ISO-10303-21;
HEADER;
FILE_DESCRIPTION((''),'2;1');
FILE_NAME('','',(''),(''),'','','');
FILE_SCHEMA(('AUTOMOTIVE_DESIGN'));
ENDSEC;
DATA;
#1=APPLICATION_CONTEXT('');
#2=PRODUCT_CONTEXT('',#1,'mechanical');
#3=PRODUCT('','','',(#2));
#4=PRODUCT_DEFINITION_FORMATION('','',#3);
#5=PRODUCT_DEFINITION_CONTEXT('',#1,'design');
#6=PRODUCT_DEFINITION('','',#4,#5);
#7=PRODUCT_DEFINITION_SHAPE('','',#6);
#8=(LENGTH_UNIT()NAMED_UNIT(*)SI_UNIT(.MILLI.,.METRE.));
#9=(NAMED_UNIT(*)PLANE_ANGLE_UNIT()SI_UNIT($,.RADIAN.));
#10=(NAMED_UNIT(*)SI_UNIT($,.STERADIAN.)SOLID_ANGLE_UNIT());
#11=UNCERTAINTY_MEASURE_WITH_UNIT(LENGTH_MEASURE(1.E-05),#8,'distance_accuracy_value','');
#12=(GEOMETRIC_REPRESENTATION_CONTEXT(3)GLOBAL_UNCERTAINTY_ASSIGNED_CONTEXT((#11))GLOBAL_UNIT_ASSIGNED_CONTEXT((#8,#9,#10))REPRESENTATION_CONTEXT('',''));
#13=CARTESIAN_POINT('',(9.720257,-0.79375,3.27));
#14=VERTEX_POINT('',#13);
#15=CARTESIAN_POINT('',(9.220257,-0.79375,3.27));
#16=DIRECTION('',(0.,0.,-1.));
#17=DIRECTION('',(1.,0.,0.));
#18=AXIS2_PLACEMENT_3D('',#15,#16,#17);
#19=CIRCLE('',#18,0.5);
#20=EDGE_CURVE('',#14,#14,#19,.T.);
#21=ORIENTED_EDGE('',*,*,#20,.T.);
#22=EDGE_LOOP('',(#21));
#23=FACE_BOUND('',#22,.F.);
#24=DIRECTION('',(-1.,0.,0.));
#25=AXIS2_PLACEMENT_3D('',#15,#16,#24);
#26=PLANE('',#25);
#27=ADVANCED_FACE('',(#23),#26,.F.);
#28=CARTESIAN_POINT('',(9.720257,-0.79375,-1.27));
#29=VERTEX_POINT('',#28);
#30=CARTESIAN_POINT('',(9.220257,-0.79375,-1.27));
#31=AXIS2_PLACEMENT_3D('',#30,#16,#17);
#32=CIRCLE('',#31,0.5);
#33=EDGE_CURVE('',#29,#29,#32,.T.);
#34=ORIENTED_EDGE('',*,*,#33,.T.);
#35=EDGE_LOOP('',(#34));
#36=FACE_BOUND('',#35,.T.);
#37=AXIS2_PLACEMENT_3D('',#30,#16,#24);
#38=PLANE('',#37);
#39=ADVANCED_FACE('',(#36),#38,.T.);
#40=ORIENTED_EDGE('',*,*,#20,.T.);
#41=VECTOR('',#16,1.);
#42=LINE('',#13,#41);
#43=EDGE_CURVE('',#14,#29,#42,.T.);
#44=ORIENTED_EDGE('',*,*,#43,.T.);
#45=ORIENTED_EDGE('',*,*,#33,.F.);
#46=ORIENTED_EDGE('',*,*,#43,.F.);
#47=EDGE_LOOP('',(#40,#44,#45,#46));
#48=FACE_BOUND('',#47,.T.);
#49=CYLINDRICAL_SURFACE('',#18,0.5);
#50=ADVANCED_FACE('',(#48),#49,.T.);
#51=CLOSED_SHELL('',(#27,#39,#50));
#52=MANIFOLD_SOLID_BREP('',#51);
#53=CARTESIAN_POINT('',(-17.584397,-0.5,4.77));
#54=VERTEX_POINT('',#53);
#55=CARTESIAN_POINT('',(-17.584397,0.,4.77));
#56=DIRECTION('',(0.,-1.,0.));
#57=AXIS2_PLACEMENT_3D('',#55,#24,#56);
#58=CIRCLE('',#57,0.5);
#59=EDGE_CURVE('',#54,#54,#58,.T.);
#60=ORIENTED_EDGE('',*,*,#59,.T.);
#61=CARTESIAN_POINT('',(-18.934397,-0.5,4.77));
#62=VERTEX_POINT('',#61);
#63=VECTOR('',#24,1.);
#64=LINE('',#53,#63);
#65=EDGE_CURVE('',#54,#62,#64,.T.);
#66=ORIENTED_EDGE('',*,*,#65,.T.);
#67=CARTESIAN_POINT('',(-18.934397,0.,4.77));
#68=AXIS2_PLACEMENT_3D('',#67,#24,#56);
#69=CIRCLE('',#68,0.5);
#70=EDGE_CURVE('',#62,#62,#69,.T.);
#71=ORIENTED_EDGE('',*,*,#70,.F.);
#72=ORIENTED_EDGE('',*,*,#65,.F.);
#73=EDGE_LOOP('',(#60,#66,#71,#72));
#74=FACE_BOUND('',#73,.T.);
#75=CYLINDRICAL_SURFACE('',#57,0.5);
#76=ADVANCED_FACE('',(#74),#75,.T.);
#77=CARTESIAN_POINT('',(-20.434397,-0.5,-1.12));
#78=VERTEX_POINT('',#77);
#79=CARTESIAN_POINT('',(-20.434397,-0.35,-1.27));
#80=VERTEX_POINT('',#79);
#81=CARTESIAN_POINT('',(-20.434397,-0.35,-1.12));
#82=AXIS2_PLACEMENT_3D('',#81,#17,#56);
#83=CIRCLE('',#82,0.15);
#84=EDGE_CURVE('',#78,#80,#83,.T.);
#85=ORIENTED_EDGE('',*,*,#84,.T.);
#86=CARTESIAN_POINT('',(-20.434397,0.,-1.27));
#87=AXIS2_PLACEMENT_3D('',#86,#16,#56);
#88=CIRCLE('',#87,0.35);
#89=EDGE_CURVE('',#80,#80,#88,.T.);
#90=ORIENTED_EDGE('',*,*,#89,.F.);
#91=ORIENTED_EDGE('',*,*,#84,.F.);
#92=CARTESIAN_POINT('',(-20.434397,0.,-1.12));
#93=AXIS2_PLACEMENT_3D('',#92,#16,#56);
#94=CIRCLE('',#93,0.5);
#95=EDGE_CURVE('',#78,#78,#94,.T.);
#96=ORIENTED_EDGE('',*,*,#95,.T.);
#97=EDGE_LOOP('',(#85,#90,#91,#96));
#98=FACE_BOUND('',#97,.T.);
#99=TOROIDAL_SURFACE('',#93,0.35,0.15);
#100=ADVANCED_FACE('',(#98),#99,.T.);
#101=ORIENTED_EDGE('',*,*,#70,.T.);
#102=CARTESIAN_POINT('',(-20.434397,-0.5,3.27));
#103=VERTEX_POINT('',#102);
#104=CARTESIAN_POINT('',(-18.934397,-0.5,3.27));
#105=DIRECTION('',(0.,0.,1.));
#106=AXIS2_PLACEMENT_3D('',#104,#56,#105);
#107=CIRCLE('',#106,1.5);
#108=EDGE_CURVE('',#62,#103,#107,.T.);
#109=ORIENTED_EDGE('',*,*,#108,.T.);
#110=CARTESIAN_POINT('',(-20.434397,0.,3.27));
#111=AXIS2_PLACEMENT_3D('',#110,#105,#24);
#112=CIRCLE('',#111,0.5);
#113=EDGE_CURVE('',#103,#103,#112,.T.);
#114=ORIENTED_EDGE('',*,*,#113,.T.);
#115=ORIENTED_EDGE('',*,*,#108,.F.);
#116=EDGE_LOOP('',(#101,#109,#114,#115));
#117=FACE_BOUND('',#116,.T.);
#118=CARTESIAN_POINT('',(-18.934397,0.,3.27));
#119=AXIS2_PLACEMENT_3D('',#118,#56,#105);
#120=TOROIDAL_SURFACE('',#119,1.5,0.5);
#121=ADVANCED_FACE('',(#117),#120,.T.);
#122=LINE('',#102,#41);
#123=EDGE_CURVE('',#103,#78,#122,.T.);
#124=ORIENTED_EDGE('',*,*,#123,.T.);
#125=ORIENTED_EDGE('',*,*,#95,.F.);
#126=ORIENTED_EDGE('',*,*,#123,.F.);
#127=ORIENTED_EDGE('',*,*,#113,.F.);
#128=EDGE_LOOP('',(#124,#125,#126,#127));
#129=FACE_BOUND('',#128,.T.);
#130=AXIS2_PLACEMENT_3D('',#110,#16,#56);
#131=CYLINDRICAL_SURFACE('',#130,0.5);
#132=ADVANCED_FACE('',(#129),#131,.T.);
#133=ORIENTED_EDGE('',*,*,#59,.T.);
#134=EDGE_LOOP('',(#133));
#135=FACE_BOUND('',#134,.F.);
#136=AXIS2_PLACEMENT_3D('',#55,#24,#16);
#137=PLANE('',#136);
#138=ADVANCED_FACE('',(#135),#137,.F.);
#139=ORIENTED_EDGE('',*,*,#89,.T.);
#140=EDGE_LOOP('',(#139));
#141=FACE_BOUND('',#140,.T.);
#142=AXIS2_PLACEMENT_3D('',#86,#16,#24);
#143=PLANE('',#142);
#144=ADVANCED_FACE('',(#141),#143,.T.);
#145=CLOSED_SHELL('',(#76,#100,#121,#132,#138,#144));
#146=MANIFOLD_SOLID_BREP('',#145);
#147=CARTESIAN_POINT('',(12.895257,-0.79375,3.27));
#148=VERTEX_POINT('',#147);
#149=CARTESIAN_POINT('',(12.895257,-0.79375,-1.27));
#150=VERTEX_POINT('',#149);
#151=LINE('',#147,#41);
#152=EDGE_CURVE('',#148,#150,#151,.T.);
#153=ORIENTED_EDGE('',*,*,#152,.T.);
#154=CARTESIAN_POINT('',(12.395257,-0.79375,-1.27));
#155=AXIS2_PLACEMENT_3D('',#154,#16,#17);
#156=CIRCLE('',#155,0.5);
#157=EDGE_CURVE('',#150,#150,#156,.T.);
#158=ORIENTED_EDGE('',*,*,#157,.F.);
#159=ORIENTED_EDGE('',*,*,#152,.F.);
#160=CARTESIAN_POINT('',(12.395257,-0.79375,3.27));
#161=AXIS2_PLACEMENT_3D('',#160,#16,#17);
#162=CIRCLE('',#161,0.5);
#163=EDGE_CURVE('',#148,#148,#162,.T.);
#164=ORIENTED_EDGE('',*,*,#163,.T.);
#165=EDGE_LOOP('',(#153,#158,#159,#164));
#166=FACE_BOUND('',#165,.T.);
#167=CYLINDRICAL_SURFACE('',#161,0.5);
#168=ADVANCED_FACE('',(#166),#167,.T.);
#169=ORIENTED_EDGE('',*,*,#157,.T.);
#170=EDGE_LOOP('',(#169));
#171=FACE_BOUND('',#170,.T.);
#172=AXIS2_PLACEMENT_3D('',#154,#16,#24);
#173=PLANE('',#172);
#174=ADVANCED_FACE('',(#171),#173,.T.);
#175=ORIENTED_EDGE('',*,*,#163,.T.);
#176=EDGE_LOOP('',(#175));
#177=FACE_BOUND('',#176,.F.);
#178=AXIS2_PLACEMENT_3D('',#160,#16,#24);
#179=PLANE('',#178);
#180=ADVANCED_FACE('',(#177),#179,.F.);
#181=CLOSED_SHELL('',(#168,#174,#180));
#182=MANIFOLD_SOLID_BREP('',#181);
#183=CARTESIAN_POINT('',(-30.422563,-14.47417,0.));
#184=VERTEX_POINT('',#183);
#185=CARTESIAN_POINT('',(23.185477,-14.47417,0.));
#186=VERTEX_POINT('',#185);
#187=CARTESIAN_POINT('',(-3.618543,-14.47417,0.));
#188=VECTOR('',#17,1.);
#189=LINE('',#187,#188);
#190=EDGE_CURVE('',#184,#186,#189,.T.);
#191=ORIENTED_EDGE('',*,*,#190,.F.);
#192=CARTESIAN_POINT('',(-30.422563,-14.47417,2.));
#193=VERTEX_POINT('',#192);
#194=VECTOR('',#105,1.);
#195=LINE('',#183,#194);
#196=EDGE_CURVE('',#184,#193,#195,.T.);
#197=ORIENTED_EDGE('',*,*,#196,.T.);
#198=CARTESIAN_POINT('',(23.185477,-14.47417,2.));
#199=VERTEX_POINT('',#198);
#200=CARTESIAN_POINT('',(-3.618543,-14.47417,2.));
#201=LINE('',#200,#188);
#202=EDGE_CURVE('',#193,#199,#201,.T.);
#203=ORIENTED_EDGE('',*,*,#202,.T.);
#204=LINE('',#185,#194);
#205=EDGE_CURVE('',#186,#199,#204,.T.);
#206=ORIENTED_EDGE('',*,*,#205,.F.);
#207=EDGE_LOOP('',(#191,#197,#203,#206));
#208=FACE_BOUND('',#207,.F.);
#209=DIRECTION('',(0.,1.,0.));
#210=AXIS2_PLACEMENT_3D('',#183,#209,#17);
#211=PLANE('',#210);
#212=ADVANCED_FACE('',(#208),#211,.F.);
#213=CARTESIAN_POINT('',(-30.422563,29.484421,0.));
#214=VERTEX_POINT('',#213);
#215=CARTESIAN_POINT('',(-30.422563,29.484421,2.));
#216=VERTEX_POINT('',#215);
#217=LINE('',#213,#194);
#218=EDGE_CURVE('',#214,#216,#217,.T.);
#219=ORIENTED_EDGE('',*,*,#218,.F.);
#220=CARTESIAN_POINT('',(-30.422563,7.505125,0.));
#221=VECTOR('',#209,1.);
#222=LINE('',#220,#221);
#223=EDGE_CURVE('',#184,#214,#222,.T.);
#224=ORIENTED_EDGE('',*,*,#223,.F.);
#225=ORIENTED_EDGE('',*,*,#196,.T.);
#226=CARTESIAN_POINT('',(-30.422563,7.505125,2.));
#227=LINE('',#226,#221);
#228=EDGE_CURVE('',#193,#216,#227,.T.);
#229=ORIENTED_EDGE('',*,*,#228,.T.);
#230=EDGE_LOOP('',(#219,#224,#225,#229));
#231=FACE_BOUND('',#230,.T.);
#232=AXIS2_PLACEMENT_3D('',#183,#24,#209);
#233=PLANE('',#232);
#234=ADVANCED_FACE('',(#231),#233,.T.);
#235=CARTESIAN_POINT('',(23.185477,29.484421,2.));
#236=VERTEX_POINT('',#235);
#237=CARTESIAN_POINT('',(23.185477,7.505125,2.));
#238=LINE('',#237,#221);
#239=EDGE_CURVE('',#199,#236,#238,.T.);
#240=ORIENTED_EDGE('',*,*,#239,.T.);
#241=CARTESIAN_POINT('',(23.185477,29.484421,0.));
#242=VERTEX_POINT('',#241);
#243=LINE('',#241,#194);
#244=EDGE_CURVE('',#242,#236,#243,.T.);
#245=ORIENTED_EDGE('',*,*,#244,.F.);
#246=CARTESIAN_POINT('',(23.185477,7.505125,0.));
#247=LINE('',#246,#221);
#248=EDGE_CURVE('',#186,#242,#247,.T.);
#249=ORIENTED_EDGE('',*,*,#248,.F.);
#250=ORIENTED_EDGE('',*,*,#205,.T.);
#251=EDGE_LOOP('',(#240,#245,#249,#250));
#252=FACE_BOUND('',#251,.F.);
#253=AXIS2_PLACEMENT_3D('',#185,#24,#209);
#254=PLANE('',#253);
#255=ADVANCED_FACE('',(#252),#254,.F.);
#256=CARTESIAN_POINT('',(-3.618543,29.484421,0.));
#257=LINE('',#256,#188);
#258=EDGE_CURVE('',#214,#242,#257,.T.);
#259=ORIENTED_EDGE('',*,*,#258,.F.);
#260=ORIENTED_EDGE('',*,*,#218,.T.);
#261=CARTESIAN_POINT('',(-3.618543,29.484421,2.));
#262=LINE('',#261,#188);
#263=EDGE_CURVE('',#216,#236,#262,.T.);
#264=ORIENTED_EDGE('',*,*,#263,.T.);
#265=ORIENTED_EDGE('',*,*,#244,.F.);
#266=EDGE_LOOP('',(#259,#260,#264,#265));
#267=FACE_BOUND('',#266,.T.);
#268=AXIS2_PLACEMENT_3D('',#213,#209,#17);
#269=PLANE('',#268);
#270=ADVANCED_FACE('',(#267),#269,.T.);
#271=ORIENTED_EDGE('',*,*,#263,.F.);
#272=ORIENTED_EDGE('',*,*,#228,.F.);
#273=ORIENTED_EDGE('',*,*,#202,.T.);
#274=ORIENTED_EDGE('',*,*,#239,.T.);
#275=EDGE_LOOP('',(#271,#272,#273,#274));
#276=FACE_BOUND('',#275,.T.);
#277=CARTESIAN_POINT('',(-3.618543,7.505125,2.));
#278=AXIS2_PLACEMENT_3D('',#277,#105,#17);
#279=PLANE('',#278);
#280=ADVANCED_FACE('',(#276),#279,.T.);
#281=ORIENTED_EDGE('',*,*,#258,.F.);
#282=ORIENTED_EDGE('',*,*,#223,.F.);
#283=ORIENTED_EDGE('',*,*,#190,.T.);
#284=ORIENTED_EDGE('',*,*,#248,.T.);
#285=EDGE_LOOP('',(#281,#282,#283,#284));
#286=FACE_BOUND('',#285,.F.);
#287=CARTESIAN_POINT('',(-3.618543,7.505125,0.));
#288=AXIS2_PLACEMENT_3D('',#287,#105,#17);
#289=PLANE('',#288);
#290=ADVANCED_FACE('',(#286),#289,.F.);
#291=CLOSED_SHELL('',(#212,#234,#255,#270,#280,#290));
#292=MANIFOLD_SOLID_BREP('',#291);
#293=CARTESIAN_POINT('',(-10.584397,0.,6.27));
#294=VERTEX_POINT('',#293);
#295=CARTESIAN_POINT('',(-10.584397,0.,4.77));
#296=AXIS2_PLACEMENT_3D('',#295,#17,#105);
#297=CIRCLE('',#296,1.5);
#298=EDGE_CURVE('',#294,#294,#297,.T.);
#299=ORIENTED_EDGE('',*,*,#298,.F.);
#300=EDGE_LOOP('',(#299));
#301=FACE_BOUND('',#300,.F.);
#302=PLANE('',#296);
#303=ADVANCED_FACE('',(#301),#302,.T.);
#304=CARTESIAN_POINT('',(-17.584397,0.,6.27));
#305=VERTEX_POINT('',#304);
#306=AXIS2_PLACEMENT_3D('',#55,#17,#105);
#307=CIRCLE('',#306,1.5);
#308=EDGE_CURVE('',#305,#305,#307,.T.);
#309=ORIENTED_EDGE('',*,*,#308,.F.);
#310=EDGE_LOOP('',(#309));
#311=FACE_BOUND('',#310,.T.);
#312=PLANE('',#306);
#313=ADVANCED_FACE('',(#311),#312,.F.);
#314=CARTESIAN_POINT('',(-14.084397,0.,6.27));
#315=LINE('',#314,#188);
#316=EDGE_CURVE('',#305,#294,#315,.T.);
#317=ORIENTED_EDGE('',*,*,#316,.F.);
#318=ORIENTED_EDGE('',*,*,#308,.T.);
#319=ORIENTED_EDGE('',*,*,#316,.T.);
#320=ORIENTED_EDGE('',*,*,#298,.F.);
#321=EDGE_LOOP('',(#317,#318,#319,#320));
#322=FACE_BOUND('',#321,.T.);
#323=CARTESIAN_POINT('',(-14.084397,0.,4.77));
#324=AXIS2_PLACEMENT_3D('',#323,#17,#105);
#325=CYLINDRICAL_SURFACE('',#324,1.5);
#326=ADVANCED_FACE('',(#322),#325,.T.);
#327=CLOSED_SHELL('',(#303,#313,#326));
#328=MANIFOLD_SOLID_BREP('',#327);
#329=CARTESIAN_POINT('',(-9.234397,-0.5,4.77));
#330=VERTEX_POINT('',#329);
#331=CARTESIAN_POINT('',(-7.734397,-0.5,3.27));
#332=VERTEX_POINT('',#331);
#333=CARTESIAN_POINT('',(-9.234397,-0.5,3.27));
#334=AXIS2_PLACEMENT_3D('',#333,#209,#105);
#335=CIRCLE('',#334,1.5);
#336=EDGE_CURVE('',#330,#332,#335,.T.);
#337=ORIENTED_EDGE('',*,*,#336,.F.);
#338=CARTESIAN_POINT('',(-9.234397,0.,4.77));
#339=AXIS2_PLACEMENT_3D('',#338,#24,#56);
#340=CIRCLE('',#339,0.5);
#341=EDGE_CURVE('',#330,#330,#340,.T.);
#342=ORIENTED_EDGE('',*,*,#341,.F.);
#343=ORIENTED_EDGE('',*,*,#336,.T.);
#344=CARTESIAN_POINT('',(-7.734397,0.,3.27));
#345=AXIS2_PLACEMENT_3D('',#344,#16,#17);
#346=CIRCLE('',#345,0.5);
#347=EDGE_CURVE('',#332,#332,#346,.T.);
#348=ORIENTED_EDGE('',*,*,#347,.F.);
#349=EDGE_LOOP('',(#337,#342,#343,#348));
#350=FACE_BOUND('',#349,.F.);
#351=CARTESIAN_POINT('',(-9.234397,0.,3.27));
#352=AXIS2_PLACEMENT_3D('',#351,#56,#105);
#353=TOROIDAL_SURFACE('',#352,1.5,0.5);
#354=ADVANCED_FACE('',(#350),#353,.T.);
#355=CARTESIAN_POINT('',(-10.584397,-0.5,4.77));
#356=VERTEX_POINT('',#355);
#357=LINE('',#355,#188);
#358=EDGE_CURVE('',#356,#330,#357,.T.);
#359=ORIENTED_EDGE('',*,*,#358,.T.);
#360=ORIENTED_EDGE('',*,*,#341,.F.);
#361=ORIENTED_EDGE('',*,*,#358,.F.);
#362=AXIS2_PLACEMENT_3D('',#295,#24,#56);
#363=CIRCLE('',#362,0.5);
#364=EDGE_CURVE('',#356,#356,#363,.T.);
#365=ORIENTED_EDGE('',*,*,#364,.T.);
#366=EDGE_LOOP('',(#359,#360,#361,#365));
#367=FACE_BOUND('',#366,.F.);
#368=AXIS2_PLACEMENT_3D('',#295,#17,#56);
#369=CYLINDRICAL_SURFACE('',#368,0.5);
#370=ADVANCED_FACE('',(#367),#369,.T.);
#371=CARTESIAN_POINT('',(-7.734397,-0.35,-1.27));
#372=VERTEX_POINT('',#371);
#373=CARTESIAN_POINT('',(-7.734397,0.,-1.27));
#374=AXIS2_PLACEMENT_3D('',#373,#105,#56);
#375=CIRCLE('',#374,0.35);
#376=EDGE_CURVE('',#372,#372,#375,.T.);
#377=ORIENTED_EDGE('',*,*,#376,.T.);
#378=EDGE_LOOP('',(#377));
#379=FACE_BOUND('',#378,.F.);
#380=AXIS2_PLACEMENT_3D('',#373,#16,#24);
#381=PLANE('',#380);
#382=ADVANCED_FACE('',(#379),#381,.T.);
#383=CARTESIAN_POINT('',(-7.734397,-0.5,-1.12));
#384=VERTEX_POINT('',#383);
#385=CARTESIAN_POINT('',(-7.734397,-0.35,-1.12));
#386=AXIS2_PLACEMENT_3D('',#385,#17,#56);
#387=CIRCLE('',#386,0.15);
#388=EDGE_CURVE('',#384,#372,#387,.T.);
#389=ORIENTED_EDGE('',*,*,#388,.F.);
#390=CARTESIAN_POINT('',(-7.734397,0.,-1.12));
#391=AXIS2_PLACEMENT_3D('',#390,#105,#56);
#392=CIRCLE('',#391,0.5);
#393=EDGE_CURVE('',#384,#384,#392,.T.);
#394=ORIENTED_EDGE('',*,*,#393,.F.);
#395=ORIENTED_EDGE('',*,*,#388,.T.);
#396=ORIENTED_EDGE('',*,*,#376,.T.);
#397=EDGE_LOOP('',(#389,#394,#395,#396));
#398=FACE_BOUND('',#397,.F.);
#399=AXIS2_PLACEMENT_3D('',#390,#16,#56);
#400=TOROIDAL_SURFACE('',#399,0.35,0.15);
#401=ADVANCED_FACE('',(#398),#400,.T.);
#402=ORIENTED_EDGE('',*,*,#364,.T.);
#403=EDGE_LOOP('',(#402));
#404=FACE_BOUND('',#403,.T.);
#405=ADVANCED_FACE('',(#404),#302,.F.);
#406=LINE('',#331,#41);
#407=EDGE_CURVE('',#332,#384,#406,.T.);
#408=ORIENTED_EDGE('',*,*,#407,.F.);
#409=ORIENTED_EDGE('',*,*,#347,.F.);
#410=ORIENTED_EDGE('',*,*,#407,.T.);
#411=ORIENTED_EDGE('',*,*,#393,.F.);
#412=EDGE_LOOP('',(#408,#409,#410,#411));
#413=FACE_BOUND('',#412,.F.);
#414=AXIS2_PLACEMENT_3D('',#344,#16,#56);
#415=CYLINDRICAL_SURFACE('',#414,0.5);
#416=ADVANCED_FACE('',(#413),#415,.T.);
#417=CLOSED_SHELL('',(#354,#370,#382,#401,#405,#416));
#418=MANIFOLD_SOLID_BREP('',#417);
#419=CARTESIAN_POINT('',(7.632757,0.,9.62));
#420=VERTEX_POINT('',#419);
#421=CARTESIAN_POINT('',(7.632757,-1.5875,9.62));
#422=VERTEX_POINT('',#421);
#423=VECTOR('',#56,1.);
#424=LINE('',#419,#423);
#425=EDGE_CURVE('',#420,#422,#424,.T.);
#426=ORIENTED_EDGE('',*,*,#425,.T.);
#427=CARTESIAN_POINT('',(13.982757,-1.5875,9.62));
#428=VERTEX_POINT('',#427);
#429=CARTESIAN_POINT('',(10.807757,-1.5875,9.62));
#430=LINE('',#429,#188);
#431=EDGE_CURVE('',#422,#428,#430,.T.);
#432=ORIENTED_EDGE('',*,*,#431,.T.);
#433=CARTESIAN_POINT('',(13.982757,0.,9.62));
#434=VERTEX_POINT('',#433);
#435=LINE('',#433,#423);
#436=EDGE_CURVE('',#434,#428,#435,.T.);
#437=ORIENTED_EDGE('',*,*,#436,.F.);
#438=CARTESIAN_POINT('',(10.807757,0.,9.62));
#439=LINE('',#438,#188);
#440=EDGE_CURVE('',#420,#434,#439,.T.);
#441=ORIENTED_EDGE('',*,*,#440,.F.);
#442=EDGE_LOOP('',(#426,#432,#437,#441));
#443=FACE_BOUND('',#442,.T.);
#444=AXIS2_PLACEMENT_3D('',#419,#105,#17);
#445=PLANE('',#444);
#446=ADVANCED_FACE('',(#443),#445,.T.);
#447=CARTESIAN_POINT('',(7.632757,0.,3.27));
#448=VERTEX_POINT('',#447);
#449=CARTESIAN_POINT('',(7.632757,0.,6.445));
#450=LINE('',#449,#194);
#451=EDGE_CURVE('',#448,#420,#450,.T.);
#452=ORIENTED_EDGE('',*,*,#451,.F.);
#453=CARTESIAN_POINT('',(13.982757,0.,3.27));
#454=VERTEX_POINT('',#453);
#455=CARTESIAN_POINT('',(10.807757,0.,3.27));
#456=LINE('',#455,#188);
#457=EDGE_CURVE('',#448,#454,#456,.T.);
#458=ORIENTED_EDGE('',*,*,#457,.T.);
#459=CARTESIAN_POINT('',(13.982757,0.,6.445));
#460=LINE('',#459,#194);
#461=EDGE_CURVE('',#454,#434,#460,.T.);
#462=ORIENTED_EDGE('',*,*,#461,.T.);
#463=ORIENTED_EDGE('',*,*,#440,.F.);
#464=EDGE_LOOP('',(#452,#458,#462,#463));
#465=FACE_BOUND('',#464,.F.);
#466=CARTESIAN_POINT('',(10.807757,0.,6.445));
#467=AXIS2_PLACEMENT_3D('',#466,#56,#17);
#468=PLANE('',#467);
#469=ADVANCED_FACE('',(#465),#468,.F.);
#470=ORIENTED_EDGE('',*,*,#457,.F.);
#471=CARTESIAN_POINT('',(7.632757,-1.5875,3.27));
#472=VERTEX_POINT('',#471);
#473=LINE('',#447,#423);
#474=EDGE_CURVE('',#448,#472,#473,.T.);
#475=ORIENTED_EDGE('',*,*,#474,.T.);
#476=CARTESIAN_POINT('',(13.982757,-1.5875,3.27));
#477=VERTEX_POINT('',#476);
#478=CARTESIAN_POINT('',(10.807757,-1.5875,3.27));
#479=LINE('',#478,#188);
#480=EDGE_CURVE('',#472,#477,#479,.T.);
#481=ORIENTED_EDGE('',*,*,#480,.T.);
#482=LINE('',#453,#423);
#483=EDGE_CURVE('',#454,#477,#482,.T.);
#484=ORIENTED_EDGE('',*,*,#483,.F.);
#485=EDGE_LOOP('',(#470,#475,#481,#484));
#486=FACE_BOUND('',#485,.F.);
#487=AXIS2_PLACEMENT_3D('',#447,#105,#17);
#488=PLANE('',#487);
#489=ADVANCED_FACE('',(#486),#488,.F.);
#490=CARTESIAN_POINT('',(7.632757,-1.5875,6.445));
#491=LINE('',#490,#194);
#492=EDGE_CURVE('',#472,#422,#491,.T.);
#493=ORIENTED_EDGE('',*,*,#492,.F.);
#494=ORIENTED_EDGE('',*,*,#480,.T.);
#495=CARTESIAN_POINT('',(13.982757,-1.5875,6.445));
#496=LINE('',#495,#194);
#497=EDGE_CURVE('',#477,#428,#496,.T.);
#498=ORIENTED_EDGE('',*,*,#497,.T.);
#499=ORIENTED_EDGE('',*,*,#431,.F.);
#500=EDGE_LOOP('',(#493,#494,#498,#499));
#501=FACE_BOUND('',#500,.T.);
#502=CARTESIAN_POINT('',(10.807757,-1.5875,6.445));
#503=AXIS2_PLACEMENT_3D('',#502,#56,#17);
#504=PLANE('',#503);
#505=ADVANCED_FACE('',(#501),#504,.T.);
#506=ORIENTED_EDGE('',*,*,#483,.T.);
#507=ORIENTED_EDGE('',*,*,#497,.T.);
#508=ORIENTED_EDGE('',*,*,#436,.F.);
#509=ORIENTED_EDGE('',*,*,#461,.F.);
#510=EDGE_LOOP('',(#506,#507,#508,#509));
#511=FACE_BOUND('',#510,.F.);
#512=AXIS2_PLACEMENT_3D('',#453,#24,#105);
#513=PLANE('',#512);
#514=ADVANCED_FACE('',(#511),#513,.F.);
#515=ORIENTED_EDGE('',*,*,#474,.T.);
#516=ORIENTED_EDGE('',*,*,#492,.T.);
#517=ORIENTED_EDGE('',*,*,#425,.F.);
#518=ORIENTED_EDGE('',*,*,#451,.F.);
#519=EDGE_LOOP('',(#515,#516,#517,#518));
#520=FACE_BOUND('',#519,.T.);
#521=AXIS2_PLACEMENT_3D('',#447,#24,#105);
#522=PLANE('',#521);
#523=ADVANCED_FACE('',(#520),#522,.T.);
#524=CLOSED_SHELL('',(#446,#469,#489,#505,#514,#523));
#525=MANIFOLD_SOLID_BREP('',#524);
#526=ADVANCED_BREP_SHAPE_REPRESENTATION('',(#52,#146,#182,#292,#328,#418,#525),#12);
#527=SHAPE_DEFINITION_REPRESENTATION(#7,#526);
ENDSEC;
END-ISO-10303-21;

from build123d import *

# Parameters (mm, degrees)
F0_W      = 53.608039394
F0_H      = 43.9585913264
F1_DEPTH  = 2
F2_W      = 7
F2_H      = 1.5
F4_R      = 0.5
F7_R      = 0.15
F10_W     = 6.35
F10_H     = 6.35
F11_DEPTH = 1.5875
F12_R     = 0.5


# Not quite as in the source:
# - a length typed as a fraction of an inch, garbled in the dataset ("3 / 203.2 mm" for 3/8 in), is restored


with BuildPart() as f1:
    # F0 (on Top) → F1 (new body)
    with BuildSketch(Plane.XY):
        with Locations((-3.6185430363, 7.5051253516)):
            Rectangle(F0_W, F0_H)
    extrude(amount=F1_DEPTH)


with BuildPart() as f3:
    # F2 (on Front) → F3 (revolve)
    with BuildSketch(Plane.XZ):
        with Locations((-14.0843965262, 5.52)):
            Rectangle(F2_W, F2_H)
    revolve(axis=Axis((-14.0843965262, 0, 4.77), (1, 0, 0)))


with BuildPart() as f6:
    # F6: sweep along a path in F5
    with BuildLine(Plane.XZ) as f6_path:
        Line((-17.5843965262, 4.77), (-18.9343965262, 4.77))
        ThreePointArc((-18.9343965262, 4.77), (-19.995056698, 4.3306601718), (-20.4343965262, 3.27))
        Line((-20.4343965262, 3.27), (-20.4343965262, -1.27))
    # F4 (on face) → F6 (sweep)
    with BuildSketch(Plane(origin=(-17.5843965262, 0, 0), x_dir=(0, -1, 0), z_dir=(-1, 0, 0))):
        with Locations((0, 4.77)):
            Circle(F4_R)
    sweep(path=f6_path.line)

    # F7
    f7_edges = [f6.edges().sort_by_distance(p)[0] for p in [
        (-20.434397, 0.5, -1.27),
    ]]
    fillet(f7_edges, radius=F7_R)


with BuildPart() as f9_1:
    # F9: instance of F6
    add(f6.part.mirror(Plane(origin=(-14.0843965262, 0, 0), x_dir=(0, -1, 0), z_dir=(-1, 0, 0))))


with BuildPart() as f11:
    # F10 (on Front) → F11 (new body)
    with BuildSketch(Plane.XZ):
        with Locations((10.8077574987, 6.445)):
            Rectangle(F10_W, F10_H)
    extrude(amount=F11_DEPTH)


with BuildPart() as f14:
    # F14: sweep along a path in F13
    with BuildLine(Plane.XZ) as f14_path:
        Line((9.2202574987, 3.27), (9.2202574987, -1.27))
    # F12 (on face) → F14 (sweep)
    with BuildSketch(Plane(origin=(0, 0, 3.27), x_dir=(1, 0, 0), z_dir=(0, 0, -1))):
        with Locations((9.2202574987, 0.79375)):
            Circle(F12_R)
        with Locations((12.3952574987, 0.79375)):
            Circle(F12_R)
    sweep(path=f14_path.line)


solid = Compound([f1.part, f3.part, f6.part, f9_1.part, f11.part, f14.part])
